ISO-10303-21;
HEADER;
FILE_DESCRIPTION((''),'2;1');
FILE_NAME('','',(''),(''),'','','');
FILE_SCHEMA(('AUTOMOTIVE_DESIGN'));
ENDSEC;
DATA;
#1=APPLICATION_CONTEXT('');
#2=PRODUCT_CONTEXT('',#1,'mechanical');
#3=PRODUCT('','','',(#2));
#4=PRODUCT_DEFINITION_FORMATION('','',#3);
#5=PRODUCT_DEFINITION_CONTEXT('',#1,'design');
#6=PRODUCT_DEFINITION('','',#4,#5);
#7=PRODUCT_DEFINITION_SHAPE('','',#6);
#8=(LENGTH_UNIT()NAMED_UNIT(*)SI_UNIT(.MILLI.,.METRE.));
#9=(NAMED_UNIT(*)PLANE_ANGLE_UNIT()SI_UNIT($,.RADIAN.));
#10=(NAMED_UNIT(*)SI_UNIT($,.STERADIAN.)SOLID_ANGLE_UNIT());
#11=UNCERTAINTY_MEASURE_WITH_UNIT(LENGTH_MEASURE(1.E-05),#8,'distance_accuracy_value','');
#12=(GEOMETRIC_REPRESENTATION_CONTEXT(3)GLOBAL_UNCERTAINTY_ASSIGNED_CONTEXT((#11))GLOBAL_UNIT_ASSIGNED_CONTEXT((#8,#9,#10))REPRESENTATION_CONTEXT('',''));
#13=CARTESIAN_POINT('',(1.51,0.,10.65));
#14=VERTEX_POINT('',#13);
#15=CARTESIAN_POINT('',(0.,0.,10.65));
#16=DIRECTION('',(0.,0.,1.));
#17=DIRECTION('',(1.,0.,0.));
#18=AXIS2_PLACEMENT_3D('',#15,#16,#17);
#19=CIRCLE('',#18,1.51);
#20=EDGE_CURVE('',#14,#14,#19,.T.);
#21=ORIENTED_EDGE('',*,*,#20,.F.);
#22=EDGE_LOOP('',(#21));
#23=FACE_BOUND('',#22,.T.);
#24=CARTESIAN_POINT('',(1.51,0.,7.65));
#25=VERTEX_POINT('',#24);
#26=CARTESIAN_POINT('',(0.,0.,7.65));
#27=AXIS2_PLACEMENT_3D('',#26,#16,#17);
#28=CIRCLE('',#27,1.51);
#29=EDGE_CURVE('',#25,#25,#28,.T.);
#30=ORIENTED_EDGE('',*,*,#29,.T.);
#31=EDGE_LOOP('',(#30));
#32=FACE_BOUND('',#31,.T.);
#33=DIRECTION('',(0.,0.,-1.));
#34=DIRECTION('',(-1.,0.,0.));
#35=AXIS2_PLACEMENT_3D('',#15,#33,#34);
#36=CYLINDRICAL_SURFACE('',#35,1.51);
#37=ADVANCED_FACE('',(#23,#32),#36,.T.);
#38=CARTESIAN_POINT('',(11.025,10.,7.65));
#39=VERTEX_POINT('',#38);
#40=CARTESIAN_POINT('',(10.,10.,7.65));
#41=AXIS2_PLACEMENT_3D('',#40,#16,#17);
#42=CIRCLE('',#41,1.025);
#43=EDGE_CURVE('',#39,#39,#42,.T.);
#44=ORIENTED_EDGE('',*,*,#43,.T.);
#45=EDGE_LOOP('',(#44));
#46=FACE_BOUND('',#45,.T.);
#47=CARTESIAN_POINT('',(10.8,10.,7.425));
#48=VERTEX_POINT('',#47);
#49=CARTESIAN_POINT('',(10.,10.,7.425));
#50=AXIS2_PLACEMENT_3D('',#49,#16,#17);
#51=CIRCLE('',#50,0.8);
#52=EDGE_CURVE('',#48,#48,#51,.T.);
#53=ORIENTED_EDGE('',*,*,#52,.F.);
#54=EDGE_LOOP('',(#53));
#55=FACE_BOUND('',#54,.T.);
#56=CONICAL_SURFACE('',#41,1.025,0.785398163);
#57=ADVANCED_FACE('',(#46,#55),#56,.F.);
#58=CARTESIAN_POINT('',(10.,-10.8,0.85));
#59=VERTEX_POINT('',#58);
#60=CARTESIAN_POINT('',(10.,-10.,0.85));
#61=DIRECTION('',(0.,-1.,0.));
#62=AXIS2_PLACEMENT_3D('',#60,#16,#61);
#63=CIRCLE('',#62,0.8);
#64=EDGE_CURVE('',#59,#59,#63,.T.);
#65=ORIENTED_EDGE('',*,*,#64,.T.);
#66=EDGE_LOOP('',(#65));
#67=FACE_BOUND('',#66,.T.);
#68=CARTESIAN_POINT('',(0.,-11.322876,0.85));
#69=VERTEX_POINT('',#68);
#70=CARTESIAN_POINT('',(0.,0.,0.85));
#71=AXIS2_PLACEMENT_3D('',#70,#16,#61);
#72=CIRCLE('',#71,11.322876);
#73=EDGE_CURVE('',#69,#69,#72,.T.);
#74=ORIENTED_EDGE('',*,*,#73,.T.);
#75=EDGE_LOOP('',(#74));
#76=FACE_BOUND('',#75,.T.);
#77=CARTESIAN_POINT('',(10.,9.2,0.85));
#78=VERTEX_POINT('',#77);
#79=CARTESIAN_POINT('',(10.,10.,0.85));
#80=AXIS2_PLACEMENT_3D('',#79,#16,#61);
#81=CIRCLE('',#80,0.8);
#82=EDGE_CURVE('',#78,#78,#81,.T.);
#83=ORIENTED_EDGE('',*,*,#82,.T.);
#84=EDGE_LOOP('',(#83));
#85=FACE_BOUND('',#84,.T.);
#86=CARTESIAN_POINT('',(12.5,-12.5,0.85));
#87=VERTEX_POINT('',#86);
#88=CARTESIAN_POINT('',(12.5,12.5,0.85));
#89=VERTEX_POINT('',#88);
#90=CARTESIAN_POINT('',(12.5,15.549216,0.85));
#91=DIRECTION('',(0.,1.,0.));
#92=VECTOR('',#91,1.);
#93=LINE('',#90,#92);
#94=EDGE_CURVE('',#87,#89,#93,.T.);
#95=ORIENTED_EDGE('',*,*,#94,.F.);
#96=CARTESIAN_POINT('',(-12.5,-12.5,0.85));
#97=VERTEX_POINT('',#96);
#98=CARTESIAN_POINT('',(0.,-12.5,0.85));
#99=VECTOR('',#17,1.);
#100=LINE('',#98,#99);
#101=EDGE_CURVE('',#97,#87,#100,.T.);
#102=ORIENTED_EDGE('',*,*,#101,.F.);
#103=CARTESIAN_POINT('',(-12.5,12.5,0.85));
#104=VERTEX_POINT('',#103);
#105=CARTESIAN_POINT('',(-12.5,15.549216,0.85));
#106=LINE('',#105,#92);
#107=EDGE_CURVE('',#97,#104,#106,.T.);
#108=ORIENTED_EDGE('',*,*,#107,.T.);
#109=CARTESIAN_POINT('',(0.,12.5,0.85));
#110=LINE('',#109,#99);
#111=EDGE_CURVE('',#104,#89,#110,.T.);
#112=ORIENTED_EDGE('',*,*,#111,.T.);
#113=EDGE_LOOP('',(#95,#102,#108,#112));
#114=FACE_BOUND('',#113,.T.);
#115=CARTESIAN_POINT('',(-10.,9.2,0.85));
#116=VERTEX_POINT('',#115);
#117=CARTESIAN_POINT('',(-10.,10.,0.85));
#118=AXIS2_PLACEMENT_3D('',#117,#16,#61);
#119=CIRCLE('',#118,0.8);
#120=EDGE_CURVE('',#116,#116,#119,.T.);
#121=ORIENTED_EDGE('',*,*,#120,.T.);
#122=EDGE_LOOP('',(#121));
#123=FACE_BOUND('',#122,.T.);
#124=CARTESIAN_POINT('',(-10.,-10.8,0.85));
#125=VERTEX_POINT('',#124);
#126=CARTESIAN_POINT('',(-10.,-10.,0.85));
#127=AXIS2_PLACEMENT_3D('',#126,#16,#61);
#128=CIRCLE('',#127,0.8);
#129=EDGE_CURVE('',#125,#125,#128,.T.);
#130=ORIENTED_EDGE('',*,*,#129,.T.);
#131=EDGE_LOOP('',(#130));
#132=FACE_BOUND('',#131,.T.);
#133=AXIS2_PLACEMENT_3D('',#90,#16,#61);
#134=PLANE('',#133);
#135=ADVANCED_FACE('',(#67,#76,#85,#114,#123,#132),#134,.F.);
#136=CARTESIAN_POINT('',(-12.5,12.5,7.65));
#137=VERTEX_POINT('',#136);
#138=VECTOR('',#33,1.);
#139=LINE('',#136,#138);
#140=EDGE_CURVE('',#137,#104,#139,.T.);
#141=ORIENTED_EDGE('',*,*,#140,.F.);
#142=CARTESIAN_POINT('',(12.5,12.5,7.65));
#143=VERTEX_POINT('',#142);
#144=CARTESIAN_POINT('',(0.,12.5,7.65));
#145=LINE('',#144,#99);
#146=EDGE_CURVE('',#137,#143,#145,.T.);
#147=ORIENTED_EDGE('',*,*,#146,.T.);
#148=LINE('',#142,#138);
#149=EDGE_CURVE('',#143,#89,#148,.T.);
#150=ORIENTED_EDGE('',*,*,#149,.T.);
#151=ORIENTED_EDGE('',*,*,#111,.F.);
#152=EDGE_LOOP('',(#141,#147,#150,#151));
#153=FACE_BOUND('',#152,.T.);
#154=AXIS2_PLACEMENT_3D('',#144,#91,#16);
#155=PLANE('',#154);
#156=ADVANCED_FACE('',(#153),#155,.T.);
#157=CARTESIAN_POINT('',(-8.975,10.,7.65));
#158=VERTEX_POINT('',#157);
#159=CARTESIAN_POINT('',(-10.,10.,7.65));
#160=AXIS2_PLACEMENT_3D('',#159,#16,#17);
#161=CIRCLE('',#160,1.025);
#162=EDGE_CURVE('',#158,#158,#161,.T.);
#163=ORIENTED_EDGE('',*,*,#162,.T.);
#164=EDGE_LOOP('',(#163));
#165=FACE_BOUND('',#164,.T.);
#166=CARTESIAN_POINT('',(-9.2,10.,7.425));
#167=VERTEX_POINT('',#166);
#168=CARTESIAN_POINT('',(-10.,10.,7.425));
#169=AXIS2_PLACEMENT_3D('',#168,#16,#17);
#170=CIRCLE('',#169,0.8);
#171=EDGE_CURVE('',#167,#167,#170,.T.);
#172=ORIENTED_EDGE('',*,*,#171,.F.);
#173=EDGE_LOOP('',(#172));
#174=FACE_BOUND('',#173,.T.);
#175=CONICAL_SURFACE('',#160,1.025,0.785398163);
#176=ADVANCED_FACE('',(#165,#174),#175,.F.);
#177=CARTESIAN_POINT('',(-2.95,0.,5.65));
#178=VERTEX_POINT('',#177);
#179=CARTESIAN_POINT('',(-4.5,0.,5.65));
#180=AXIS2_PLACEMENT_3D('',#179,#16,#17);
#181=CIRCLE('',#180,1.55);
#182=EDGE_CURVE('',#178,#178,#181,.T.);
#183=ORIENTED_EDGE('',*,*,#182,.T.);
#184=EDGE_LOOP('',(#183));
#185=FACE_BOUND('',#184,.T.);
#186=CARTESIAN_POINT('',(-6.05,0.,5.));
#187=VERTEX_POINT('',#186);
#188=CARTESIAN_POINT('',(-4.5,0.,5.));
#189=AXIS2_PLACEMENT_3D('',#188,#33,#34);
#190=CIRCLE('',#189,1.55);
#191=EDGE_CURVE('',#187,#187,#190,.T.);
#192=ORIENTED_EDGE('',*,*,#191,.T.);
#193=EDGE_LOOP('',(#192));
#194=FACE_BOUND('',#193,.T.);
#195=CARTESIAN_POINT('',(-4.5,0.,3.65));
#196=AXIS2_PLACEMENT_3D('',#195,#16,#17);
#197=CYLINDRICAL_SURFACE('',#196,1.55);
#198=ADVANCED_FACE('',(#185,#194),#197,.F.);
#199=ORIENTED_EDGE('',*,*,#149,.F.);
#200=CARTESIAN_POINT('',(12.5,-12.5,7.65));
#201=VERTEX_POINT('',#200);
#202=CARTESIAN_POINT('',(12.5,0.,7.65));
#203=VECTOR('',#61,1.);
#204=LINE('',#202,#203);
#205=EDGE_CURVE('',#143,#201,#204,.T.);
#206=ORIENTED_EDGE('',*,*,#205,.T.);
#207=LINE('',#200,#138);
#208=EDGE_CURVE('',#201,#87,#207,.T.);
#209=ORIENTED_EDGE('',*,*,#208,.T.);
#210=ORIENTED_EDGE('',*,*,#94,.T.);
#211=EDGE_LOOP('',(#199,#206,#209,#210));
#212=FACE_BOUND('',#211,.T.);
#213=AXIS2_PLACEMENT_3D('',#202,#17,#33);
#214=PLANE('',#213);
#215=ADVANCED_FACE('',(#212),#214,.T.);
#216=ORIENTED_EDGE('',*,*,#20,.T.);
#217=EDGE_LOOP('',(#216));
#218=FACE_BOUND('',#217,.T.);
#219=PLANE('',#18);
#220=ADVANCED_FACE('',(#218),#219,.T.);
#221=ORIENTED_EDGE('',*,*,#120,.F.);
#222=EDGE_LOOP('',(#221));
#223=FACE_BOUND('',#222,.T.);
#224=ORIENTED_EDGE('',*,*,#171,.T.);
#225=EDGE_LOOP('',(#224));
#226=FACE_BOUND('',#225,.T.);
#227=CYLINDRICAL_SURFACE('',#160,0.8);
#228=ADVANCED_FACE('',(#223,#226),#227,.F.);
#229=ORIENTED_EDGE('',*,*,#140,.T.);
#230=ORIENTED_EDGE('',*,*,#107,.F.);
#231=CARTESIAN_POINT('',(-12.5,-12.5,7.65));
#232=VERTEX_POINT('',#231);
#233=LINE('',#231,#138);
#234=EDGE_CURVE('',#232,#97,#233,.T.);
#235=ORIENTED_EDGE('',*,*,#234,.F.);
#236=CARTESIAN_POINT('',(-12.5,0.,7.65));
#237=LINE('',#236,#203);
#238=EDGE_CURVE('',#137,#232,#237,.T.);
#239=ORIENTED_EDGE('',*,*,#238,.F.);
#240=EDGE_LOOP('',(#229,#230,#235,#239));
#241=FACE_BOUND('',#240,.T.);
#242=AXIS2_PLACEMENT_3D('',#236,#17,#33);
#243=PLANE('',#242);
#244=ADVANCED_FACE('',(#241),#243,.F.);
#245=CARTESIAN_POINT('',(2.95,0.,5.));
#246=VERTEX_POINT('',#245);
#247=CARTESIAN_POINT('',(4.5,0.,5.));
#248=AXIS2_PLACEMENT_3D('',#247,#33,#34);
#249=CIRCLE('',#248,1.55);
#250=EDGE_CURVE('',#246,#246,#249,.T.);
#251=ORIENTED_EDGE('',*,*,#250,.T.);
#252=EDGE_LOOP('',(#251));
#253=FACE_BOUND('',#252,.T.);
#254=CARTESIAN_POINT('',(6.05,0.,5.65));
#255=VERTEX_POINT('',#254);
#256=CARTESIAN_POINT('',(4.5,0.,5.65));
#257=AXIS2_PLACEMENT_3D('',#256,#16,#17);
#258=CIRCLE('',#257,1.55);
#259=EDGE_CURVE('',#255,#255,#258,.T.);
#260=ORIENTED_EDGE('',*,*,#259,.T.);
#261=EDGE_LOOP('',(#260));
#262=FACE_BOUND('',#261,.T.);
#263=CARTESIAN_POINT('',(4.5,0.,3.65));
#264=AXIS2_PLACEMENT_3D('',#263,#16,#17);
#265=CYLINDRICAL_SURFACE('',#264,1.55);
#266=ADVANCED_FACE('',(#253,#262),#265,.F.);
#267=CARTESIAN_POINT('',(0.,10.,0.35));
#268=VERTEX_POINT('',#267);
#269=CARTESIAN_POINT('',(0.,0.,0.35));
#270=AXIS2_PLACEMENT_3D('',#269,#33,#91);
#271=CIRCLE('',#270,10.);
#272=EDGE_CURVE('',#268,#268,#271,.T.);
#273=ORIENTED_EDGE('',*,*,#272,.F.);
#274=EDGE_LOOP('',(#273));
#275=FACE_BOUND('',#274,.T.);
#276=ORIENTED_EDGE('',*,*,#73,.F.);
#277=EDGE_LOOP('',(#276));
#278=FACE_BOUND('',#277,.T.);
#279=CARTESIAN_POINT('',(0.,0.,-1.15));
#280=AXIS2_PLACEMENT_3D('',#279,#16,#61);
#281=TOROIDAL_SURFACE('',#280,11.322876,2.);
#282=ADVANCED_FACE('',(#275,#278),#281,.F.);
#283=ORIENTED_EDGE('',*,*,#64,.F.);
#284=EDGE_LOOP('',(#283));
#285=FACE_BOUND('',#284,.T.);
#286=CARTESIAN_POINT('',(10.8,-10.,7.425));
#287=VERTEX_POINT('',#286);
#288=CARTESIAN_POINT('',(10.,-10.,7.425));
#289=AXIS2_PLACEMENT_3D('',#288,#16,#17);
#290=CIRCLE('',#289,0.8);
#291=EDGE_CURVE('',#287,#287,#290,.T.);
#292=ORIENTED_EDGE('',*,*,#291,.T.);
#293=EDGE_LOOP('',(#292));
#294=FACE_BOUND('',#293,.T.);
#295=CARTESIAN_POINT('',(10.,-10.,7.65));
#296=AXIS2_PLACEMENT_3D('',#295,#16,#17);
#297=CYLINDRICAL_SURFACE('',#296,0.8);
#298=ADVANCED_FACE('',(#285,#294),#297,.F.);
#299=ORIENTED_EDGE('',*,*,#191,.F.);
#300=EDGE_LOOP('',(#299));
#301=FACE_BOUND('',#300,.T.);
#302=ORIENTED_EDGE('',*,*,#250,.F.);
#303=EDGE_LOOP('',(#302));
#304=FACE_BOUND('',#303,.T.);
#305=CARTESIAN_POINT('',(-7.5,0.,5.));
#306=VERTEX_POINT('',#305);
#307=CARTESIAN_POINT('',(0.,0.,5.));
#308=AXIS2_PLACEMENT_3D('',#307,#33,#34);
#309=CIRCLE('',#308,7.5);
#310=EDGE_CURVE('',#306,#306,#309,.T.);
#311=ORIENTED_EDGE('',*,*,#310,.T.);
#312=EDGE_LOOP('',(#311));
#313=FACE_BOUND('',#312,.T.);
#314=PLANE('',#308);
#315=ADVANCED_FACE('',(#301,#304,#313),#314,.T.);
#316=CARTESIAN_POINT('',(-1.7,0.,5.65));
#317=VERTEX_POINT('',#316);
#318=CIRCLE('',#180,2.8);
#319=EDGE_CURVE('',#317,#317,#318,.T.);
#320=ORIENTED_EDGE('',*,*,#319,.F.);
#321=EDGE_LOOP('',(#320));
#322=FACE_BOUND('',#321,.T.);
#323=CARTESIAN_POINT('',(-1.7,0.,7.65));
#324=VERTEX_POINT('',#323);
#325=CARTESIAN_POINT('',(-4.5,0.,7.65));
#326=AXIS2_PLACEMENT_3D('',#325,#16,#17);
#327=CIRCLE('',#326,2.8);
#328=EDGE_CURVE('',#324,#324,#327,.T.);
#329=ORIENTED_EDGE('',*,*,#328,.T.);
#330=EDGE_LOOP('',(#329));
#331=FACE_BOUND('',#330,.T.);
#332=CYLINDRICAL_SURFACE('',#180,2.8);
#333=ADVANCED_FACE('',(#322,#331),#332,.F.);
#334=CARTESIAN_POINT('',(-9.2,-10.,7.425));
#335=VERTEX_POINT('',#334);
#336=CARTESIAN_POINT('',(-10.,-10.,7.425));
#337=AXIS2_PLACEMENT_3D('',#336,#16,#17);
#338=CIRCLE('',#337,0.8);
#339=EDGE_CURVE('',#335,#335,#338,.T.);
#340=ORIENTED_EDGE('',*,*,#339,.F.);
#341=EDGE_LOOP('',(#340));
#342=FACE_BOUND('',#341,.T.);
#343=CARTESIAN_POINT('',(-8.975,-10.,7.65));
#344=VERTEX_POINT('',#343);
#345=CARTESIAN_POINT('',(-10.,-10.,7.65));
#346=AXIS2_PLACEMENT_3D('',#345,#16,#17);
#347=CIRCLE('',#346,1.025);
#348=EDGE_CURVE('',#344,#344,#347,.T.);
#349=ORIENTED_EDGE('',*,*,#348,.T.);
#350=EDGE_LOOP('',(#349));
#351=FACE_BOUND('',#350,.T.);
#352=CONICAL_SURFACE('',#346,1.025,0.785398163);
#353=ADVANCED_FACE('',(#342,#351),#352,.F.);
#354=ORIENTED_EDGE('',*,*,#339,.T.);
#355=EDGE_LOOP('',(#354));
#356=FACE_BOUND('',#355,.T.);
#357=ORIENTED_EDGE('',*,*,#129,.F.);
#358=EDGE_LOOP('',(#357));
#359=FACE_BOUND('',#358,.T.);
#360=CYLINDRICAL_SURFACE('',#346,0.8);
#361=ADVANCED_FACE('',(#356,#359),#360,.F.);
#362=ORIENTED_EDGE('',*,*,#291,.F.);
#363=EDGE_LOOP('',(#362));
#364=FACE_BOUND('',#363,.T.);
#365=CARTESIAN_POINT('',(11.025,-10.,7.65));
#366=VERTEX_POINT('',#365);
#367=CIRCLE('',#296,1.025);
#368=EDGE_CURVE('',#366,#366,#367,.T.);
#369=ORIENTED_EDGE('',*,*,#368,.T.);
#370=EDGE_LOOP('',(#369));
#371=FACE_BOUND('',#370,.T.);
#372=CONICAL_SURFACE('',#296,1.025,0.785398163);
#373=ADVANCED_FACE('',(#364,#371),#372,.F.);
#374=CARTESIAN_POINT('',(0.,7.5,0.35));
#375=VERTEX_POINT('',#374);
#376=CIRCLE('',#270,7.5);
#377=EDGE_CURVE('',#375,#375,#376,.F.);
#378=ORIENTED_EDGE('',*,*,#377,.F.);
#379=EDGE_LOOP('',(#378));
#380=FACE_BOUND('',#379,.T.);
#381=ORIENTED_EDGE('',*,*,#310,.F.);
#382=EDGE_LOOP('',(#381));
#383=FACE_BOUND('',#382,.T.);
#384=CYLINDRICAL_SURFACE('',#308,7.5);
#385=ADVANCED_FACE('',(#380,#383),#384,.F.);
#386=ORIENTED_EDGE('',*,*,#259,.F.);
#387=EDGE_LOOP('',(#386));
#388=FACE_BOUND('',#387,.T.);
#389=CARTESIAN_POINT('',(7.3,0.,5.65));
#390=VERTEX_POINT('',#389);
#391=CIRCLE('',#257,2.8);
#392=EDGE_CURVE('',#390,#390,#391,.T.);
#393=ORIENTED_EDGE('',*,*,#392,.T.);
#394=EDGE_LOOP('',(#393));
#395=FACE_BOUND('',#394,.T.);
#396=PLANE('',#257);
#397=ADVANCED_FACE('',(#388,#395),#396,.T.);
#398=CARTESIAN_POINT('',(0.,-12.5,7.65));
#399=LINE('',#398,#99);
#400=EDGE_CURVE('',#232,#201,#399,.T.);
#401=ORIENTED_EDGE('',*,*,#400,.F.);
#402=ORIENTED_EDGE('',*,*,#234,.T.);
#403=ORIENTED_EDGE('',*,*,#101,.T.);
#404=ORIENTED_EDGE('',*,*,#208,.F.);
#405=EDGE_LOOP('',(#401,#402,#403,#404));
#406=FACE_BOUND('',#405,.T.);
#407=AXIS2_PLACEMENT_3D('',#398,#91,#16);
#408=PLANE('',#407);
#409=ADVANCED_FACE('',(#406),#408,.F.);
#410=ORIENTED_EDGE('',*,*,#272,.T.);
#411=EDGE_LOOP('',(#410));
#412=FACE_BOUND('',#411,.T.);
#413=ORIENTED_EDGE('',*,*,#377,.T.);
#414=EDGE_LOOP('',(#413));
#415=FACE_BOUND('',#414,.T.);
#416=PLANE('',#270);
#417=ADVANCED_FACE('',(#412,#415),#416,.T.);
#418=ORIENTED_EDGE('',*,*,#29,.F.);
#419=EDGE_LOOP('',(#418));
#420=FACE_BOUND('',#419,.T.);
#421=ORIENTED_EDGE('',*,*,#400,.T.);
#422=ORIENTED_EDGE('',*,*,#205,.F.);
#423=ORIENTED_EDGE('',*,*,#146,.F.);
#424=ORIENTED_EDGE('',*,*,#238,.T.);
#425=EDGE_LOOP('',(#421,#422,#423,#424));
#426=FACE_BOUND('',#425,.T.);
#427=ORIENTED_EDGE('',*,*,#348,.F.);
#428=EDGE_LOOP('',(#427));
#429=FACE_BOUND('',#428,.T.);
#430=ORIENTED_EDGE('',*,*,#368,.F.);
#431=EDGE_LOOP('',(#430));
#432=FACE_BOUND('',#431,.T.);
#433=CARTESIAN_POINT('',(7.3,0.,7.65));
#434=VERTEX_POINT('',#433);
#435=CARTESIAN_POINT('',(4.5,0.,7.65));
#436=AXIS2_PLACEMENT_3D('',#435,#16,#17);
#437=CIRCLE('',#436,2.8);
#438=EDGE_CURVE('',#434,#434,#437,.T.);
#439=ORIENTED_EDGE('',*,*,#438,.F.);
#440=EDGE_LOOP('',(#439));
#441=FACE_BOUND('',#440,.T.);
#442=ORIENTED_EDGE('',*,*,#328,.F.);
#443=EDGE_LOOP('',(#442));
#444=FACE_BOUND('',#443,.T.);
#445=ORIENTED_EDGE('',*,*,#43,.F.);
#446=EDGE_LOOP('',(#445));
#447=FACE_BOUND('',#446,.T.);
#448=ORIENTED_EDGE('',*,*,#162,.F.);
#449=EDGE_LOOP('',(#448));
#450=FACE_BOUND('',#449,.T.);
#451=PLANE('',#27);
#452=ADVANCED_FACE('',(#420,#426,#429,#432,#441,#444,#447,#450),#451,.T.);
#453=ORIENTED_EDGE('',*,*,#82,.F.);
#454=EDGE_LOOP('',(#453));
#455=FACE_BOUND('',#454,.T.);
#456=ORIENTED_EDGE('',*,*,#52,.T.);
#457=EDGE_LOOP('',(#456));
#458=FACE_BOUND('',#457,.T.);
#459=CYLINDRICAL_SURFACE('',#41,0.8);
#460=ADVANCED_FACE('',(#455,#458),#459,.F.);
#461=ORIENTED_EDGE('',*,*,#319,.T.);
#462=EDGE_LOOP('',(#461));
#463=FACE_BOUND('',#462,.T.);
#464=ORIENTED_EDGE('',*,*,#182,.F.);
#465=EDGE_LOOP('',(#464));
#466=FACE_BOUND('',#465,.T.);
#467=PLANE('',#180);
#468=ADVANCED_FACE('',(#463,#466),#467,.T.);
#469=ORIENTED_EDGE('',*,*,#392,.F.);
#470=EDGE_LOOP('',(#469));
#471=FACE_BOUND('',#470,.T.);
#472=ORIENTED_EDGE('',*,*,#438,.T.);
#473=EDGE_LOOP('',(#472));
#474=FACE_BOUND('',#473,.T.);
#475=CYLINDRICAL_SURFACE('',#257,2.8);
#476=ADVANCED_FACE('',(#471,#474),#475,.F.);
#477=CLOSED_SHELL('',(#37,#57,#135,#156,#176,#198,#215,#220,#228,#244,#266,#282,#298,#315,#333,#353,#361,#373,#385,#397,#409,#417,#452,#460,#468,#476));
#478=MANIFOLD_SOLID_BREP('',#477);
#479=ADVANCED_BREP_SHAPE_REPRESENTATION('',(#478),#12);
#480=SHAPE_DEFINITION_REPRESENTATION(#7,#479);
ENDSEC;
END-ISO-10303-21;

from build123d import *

# Parameters (mm, degrees)
SKETCH_1_W                   = 25
SKETCH_1_H                   = 25
SKETCH_1_R                   = 1.5
EXTRUDE_1_DEPTH              = 7.65
SKETCH_2_R                   = 1.51
EXTRUDE_2_DEPTH              = 3
SKETCH_3_R                   = 7.5
CUT_EXTRUDE_1_DEPTH          = 5
SKETCH_4_R                   = 2.8
CUT_EXTRUDE_2_DEPTH          = 2
SKETCH_5_R                   = 1.55
CUT_EXTRUDE_3_DEPTH          = 2
SKETCH_6_W                   = 7.593154143
SKETCH_6_H                   = 30.65177665
CUT_EXTRUDE_4_DEPTH          = 30.911076544
EXTRUDE_START                = 0.5
SKETCH_7_R                   = 10
SKETCH_7_R_2                 = 7.5
EXTRUDE_3_DEPTH              = 0.5
FILLET_4_R                   = 2
HOLE_WIZARD_M2_1_D           = 1.6
HOLE_WIZARD_M2_1_CSINK_D     = 2.05
HOLE_WIZARD_M2_1_CSINK_ANGLE = 90


with BuildPart() as part:
    # 草图1 → 凸台-拉伸1 (new body)
    # profile 1 of 2: a face of its own
    with BuildSketch(Plane.XY):
        Rectangle(SKETCH_1_W, SKETCH_1_H)
        Circle(SKETCH_1_R, mode=Mode.SUBTRACT)
    # profile 2 of 2: a face of its own
    with BuildSketch(Plane.XY):
        Circle(SKETCH_1_R)
    extrude(amount=EXTRUDE_1_DEPTH)

    # 草图2 → 凸台-拉伸2 (add)
    with BuildSketch(Plane.XY.offset(7.65)):
        Circle(SKETCH_2_R)
    extrude(amount=EXTRUDE_2_DEPTH)

    # 草图3 → 切除-拉伸1 (cut)
    with BuildSketch(Plane(origin=(0, 0, 0), x_dir=(-1, 0, 0), z_dir=(0, 0, -1))):
        Circle(SKETCH_3_R)
    extrude(amount=-CUT_EXTRUDE_1_DEPTH, mode=Mode.SUBTRACT)

    # 草图4 → 切除-拉伸2 (cut)
    with BuildSketch(Plane.XY.offset(7.65)):
        with Locations((4.5, 0)):
            Circle(SKETCH_4_R)
        with Locations((-4.5, 0)):
            Circle(SKETCH_4_R)
    extrude(amount=-CUT_EXTRUDE_2_DEPTH, mode=Mode.SUBTRACT)

    # 草图5 → 切除-拉伸3 (cut)
    with BuildSketch(Plane.XY.offset(5.65)):
        with Locations((4.5, 0)):
            Circle(SKETCH_5_R)
        with Locations((-4.5, 0)):
            Circle(SKETCH_5_R)
    extrude(amount=-CUT_EXTRUDE_3_DEPTH, mode=Mode.SUBTRACT)

    # 草图6 → 切除-拉伸4 (cut, through all)
    with BuildSketch(Plane.ZY.offset(12.5)):
        with Locations((-2.946577072, 0.223328063)):
            Rectangle(SKETCH_6_W, SKETCH_6_H)
    extrude(amount=-CUT_EXTRUDE_4_DEPTH, mode=Mode.SUBTRACT)

    # 草图7 → 凸台-拉伸3 (add)
    with BuildSketch(Plane(origin=(0, 0, 0.85), x_dir=(-1, 0, 0), z_dir=(0, 0, -1)).offset(EXTRUDE_START)):
        with Locations(Location((0, 0, 0), (0, 0, 90))):
            Circle(SKETCH_7_R)
        Circle(SKETCH_7_R_2, mode=Mode.SUBTRACT)
    extrude(amount=-EXTRUDE_3_DEPTH)

    # 圆角4
    # the kernel refuses this fillet: 2 mm, written as the material it adds along each edge
    with BuildSketch(Plane(origin=(0, 0, 0.85), x_dir=(0, 1, 0), z_dir=(-1, 0, 0))) as fillet_4_piece_1:
        with BuildLine():
            CenterArc((11.322875656, 2), FILLET_4_R, 228.590377891, 41.409622109)
            Line((11.322875656, 0), (11.322875656, -0.04))
            Line((11.322875656, -0.04), (10, -0.04))
            Line((10, -0.04), (9.96, 0))
            ThreePointArc((9.96, 0), (9.96, 0.25), (9.973542487, 0.47))
            Line((9.973542487, 0.47), (10, 0.5))
        make_face()
    revolve(axis=Axis((0, 0, 0.85), (0, 0, -1)))

    # M2 螺纹孔1 (through all)
    with Locations(Plane.XY.offset(7.65)):
        with Locations((-10, 10), (10, 10), (-10, -10), (10, -10)):
            CounterSinkHole(HOLE_WIZARD_M2_1_D / 2, HOLE_WIZARD_M2_1_CSINK_D / 2, counter_sink_angle=HOLE_WIZARD_M2_1_CSINK_ANGLE)


solid = part.part
